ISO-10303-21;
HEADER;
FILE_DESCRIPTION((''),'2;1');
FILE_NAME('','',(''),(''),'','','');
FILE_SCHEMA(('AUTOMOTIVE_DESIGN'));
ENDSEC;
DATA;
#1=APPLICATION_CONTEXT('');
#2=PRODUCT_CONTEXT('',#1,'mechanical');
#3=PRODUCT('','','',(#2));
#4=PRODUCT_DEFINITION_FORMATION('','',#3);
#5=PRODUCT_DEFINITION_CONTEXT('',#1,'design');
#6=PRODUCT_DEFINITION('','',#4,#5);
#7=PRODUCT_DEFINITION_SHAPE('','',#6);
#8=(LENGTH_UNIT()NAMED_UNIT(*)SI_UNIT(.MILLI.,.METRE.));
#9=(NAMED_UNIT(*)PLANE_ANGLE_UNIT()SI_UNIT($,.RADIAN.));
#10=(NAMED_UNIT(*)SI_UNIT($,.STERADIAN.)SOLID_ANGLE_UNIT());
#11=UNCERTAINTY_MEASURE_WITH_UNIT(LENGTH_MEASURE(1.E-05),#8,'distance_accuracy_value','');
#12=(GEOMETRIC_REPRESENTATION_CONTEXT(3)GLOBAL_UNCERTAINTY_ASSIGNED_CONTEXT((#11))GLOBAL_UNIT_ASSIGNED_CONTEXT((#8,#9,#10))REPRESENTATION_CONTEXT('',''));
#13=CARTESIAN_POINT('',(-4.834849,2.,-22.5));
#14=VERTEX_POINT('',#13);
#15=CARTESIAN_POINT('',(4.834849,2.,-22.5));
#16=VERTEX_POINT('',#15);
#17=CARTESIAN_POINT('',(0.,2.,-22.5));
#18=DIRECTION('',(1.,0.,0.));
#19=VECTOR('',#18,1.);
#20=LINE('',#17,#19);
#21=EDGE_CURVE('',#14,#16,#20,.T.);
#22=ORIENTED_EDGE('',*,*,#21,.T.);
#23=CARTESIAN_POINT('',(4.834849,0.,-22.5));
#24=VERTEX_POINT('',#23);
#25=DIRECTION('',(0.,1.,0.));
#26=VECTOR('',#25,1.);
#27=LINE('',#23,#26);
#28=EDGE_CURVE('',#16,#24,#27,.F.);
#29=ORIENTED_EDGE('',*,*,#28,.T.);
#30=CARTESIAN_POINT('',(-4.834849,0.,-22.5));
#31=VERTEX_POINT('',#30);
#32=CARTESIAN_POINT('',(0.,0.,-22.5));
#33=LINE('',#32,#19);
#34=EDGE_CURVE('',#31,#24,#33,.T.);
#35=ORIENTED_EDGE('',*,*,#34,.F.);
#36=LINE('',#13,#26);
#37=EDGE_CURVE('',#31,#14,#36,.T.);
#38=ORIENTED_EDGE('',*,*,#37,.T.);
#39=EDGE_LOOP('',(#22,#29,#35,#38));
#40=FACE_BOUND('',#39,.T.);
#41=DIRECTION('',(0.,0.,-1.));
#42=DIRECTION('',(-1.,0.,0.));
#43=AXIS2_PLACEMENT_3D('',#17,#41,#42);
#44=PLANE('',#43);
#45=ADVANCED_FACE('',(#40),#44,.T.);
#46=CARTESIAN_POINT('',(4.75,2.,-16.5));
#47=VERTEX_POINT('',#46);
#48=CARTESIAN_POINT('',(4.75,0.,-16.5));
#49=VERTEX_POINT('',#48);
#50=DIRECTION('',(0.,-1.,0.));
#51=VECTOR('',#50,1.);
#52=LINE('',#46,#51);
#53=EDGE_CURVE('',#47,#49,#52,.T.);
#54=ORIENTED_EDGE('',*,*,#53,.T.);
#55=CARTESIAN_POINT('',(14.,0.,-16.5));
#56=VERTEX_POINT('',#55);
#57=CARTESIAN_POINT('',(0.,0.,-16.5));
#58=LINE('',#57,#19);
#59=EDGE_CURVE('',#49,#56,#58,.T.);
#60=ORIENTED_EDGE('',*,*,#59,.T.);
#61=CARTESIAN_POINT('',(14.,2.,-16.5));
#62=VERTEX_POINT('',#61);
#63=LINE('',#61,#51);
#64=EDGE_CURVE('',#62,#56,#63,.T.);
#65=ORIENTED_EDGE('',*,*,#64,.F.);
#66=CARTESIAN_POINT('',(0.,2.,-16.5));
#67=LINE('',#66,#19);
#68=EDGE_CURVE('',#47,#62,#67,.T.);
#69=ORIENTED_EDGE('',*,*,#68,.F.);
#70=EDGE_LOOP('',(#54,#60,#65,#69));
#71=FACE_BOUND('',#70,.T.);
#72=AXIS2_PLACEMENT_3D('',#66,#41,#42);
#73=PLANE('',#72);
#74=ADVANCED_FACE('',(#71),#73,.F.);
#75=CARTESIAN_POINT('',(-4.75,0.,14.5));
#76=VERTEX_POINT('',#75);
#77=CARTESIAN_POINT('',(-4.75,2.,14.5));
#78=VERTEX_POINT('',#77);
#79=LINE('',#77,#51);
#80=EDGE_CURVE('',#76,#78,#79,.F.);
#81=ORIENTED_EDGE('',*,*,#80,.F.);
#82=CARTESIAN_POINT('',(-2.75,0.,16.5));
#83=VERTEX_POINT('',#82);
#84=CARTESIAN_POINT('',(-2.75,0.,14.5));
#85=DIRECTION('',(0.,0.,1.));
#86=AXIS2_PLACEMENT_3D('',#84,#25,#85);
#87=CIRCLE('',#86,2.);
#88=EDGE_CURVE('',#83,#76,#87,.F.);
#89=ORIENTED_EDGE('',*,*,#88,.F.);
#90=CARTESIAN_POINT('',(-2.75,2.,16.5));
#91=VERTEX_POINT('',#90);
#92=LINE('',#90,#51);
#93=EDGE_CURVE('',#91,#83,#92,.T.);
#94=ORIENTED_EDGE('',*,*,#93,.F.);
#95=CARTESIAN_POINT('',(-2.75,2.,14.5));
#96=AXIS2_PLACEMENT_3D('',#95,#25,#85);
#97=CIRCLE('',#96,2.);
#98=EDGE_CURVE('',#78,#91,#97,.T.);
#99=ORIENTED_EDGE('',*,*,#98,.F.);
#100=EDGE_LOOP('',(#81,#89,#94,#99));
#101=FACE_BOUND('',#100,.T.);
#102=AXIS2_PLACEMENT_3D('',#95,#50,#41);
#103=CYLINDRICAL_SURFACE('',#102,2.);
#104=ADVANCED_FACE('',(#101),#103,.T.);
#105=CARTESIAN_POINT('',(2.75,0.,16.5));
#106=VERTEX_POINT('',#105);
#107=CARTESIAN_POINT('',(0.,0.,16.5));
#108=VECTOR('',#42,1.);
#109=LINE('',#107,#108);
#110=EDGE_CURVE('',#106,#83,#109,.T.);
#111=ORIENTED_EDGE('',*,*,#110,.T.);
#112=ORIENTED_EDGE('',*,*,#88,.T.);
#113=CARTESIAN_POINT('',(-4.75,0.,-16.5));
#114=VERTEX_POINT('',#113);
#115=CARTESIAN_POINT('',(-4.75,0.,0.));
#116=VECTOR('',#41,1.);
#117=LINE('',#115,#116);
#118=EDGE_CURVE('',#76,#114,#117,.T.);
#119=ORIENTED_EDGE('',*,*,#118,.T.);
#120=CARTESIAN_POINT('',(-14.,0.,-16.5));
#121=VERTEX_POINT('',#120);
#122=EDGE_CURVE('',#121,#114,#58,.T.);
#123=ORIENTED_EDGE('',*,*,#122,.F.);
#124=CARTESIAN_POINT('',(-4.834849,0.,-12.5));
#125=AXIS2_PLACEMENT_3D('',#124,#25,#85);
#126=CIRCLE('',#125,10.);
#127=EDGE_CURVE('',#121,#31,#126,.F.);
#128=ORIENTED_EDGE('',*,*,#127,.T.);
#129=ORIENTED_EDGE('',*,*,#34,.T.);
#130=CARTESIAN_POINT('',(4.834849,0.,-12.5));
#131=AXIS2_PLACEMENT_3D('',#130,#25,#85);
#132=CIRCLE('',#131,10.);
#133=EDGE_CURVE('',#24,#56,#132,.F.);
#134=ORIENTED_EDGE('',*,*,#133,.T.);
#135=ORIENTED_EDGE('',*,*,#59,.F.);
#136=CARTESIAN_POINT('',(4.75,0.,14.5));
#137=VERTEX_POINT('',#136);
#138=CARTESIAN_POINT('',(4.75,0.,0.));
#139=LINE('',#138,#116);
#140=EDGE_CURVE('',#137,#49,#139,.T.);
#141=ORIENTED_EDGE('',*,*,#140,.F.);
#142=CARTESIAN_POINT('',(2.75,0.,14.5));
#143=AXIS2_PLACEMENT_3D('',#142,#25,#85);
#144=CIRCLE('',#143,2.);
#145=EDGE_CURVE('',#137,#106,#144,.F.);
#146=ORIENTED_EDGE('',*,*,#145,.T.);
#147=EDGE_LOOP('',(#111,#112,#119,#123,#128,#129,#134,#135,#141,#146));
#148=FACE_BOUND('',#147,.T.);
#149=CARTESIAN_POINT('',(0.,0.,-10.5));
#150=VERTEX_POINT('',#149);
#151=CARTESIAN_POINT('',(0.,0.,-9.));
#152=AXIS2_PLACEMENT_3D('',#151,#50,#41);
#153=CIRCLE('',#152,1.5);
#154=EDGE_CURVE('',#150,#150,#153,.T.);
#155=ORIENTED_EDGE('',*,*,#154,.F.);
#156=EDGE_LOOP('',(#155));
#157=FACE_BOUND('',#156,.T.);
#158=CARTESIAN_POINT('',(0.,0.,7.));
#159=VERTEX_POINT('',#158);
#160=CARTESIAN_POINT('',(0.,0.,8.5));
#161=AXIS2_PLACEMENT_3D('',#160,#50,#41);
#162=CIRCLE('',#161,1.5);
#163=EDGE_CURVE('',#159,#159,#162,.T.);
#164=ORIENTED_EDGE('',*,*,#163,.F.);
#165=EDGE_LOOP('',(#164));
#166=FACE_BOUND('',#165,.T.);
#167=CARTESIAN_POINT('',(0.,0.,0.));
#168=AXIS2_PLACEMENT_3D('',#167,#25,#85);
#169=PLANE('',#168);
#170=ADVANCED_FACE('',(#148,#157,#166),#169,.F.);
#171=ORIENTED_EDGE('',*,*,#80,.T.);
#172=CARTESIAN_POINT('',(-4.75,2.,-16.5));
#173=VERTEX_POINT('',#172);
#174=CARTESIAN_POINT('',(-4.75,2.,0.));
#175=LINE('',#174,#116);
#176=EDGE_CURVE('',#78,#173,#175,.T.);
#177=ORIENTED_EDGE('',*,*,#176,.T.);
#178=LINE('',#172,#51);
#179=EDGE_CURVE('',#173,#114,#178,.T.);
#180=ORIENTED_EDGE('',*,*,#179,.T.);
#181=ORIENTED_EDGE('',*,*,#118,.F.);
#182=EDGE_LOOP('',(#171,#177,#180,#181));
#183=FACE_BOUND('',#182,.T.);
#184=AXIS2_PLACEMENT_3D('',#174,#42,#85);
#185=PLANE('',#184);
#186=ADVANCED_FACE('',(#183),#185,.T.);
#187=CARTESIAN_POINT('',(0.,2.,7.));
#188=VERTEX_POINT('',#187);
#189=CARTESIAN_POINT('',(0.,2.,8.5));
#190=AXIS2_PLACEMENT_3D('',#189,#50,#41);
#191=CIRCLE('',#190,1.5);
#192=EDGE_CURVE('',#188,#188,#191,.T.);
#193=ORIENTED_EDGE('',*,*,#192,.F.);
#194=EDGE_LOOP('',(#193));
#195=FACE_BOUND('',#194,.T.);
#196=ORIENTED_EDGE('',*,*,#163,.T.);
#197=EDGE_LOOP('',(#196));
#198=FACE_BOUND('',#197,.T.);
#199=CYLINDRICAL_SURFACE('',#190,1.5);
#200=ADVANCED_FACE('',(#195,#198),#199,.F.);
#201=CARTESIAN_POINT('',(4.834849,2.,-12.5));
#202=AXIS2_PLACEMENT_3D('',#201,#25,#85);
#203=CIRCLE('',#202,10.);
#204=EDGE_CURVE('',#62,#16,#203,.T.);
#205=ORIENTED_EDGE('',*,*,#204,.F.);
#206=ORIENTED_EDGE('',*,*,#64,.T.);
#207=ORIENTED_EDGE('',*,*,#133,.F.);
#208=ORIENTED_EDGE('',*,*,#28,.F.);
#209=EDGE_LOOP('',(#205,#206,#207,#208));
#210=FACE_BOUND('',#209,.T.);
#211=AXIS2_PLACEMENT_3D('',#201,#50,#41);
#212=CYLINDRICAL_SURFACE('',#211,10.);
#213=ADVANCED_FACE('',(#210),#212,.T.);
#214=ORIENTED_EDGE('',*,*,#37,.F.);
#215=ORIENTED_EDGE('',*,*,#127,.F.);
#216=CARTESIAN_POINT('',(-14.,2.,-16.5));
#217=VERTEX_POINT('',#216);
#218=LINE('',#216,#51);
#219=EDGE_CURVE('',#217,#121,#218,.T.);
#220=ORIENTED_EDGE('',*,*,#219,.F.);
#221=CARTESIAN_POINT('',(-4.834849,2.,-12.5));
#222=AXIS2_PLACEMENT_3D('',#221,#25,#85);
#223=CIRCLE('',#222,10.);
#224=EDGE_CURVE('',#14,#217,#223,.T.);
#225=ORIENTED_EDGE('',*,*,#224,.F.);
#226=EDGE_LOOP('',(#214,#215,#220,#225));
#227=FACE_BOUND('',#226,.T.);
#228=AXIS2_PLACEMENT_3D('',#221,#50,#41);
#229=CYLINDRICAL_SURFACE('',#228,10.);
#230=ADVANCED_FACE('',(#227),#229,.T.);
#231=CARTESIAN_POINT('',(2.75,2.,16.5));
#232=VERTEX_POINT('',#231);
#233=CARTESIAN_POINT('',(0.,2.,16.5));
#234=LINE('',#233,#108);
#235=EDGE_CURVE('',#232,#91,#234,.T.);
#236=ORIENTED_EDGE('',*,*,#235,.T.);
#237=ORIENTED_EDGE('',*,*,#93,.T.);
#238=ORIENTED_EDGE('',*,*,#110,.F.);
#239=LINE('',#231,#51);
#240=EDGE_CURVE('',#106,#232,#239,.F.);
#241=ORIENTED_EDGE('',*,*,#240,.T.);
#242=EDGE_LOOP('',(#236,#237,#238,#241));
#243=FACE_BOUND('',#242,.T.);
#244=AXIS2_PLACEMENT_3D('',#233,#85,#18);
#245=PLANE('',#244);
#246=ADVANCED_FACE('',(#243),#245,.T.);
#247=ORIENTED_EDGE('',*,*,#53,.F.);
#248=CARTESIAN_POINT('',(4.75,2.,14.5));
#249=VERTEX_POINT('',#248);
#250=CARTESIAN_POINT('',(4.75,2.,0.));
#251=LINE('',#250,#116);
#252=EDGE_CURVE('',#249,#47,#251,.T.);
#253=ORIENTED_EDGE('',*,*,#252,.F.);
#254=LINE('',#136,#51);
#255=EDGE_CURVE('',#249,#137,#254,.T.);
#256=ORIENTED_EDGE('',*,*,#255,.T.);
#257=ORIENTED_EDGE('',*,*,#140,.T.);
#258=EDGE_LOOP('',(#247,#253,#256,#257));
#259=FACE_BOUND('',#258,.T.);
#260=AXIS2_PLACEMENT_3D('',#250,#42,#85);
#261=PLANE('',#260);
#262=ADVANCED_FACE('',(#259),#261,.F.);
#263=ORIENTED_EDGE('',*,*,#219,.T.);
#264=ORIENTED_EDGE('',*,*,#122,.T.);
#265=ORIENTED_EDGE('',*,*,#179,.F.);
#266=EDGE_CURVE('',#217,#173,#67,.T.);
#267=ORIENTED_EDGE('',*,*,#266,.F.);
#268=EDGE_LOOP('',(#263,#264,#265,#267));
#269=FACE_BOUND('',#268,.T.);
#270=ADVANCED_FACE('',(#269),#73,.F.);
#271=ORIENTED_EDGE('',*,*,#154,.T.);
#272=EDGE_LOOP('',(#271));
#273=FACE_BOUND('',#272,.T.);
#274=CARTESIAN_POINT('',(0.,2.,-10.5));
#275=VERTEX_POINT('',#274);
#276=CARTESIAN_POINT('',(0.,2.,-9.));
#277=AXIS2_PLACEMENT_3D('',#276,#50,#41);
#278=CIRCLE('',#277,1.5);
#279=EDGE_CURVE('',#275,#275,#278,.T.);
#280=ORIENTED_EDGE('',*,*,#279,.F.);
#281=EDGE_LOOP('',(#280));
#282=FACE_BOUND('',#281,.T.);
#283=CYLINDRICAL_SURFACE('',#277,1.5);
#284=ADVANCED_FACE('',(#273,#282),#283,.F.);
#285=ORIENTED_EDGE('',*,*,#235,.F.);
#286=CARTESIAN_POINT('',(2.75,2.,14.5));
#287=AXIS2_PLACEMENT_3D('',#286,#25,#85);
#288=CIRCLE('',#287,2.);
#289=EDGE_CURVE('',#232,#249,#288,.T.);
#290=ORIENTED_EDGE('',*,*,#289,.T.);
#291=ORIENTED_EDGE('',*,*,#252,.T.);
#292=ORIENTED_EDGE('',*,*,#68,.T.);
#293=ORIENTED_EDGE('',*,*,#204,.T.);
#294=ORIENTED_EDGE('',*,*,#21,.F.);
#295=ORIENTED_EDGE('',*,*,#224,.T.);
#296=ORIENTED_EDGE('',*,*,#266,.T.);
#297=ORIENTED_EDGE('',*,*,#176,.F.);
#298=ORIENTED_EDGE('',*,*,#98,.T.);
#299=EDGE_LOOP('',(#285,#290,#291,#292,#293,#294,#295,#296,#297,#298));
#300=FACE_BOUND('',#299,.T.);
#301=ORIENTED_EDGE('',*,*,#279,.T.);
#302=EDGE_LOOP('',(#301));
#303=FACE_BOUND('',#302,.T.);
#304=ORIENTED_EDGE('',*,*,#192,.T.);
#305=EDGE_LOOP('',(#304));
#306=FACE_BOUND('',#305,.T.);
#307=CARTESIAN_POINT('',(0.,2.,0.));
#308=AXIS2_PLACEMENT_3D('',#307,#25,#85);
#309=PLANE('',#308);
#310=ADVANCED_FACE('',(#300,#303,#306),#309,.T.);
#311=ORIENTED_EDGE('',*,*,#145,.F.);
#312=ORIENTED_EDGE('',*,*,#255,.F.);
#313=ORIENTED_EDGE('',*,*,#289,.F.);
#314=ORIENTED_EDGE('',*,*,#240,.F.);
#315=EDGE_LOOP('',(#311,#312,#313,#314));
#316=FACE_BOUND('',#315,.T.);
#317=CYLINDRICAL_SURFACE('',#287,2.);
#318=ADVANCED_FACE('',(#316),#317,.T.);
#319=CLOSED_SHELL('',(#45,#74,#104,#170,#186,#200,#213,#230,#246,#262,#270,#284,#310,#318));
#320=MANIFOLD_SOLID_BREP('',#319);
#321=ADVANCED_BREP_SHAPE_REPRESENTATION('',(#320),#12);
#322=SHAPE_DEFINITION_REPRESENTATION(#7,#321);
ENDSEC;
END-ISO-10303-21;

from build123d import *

# Parameters (mm, degrees)
SKETCH1_W           = 9.5
SKETCH1_H           = 33
SKETCH1_W_2         = 28
SKETCH1_H_2         = 6
BOSS_EXTRUDE2_DEPTH = 2
SKETCH2_R           = 1.5
CUT_EXTRUDE1_DEPTH  = 27.575364532
FILLET6_R           = 10
FILLET7_R           = 10
FILLET10_R          = 2


with BuildPart() as part:
    # Sketch1 → Boss-Extrude2 (new body)
    with BuildSketch(Plane(origin=(0, 0, 0), x_dir=(1, 0, 0), z_dir=(0, 1, 0))):
        Rectangle(SKETCH1_W, SKETCH1_H)
        with Locations((0, 19.5)):
            Rectangle(SKETCH1_W_2, SKETCH1_H_2)
    extrude(amount=BOSS_EXTRUDE2_DEPTH)

    # Sketch2 → Cut-Extrude1 (cut, through all)
    with BuildSketch(Plane.XZ):
        with Locations(Location((0, 8.5, 0), (0, 0, 270))):
            Circle(SKETCH2_R)
        with Locations(Location((0, -9, 0), (0, 0, 270))):
            Circle(SKETCH2_R)
    extrude(amount=-CUT_EXTRUDE1_DEPTH, mode=Mode.SUBTRACT)

    # Fillet6
    # the kernel refuses this fillet: 10 mm, written as the material it takes off along each edge
    with BuildSketch(Plane(origin=(14, -22.912878475, -22.5), x_dir=(-1, 0, 0), z_dir=(0, 1, 0))) as fillet6_piece_1:
        with BuildLine():
            CenterArc((9.16515139, 10), FILLET6_R, 203.578178478, 66.421821522)
            Line((0, 6), (-0.183303028, 5.92))
            ThreePointArc((-0.183303028, 5.92), (-0.2, 3), (-0.2, 0))
            Line((-0.2, 0), (0, -0.2))
            Line((0, -0.2), (9.16515139, -0.2))
            Line((9.16515139, -0.2), (9.16515139, 0))
        make_face()
    extrude(amount=47.82575695, mode=Mode.SUBTRACT)

    # Fillet7
    # the kernel refuses this fillet: 10 mm, written as the material it takes off along each edge
    with BuildSketch(Plane(origin=(-14, -22.912878475, -22.5), x_dir=(0, 0, 1), z_dir=(0, 1, 0))) as fillet7_piece_1:
        with BuildLine():
            CenterArc((10, 9.16515139), FILLET7_R, 180, 66.421821522)
            Line((0, 9.16515139), (-0.2, 9.16515139))
            Line((-0.2, 9.16515139), (-0.2, 0))
            Line((-0.2, 0), (0, -0.2))
            ThreePointArc((0, -0.2), (3, -0.2), (5.92, -0.183303028))
            Line((5.92, -0.183303028), (6, 0))
        make_face()
    extrude(amount=47.82575695, mode=Mode.SUBTRACT)

    # Fillet10
    fillet10_edges = [part.edges().sort_by_distance(p)[0] for p in [
        (4.75, 1, 16.5),
        (-4.75, 1, 16.5),
    ]]
    fillet(fillet10_edges, radius=FILLET10_R)


solid = part.part
